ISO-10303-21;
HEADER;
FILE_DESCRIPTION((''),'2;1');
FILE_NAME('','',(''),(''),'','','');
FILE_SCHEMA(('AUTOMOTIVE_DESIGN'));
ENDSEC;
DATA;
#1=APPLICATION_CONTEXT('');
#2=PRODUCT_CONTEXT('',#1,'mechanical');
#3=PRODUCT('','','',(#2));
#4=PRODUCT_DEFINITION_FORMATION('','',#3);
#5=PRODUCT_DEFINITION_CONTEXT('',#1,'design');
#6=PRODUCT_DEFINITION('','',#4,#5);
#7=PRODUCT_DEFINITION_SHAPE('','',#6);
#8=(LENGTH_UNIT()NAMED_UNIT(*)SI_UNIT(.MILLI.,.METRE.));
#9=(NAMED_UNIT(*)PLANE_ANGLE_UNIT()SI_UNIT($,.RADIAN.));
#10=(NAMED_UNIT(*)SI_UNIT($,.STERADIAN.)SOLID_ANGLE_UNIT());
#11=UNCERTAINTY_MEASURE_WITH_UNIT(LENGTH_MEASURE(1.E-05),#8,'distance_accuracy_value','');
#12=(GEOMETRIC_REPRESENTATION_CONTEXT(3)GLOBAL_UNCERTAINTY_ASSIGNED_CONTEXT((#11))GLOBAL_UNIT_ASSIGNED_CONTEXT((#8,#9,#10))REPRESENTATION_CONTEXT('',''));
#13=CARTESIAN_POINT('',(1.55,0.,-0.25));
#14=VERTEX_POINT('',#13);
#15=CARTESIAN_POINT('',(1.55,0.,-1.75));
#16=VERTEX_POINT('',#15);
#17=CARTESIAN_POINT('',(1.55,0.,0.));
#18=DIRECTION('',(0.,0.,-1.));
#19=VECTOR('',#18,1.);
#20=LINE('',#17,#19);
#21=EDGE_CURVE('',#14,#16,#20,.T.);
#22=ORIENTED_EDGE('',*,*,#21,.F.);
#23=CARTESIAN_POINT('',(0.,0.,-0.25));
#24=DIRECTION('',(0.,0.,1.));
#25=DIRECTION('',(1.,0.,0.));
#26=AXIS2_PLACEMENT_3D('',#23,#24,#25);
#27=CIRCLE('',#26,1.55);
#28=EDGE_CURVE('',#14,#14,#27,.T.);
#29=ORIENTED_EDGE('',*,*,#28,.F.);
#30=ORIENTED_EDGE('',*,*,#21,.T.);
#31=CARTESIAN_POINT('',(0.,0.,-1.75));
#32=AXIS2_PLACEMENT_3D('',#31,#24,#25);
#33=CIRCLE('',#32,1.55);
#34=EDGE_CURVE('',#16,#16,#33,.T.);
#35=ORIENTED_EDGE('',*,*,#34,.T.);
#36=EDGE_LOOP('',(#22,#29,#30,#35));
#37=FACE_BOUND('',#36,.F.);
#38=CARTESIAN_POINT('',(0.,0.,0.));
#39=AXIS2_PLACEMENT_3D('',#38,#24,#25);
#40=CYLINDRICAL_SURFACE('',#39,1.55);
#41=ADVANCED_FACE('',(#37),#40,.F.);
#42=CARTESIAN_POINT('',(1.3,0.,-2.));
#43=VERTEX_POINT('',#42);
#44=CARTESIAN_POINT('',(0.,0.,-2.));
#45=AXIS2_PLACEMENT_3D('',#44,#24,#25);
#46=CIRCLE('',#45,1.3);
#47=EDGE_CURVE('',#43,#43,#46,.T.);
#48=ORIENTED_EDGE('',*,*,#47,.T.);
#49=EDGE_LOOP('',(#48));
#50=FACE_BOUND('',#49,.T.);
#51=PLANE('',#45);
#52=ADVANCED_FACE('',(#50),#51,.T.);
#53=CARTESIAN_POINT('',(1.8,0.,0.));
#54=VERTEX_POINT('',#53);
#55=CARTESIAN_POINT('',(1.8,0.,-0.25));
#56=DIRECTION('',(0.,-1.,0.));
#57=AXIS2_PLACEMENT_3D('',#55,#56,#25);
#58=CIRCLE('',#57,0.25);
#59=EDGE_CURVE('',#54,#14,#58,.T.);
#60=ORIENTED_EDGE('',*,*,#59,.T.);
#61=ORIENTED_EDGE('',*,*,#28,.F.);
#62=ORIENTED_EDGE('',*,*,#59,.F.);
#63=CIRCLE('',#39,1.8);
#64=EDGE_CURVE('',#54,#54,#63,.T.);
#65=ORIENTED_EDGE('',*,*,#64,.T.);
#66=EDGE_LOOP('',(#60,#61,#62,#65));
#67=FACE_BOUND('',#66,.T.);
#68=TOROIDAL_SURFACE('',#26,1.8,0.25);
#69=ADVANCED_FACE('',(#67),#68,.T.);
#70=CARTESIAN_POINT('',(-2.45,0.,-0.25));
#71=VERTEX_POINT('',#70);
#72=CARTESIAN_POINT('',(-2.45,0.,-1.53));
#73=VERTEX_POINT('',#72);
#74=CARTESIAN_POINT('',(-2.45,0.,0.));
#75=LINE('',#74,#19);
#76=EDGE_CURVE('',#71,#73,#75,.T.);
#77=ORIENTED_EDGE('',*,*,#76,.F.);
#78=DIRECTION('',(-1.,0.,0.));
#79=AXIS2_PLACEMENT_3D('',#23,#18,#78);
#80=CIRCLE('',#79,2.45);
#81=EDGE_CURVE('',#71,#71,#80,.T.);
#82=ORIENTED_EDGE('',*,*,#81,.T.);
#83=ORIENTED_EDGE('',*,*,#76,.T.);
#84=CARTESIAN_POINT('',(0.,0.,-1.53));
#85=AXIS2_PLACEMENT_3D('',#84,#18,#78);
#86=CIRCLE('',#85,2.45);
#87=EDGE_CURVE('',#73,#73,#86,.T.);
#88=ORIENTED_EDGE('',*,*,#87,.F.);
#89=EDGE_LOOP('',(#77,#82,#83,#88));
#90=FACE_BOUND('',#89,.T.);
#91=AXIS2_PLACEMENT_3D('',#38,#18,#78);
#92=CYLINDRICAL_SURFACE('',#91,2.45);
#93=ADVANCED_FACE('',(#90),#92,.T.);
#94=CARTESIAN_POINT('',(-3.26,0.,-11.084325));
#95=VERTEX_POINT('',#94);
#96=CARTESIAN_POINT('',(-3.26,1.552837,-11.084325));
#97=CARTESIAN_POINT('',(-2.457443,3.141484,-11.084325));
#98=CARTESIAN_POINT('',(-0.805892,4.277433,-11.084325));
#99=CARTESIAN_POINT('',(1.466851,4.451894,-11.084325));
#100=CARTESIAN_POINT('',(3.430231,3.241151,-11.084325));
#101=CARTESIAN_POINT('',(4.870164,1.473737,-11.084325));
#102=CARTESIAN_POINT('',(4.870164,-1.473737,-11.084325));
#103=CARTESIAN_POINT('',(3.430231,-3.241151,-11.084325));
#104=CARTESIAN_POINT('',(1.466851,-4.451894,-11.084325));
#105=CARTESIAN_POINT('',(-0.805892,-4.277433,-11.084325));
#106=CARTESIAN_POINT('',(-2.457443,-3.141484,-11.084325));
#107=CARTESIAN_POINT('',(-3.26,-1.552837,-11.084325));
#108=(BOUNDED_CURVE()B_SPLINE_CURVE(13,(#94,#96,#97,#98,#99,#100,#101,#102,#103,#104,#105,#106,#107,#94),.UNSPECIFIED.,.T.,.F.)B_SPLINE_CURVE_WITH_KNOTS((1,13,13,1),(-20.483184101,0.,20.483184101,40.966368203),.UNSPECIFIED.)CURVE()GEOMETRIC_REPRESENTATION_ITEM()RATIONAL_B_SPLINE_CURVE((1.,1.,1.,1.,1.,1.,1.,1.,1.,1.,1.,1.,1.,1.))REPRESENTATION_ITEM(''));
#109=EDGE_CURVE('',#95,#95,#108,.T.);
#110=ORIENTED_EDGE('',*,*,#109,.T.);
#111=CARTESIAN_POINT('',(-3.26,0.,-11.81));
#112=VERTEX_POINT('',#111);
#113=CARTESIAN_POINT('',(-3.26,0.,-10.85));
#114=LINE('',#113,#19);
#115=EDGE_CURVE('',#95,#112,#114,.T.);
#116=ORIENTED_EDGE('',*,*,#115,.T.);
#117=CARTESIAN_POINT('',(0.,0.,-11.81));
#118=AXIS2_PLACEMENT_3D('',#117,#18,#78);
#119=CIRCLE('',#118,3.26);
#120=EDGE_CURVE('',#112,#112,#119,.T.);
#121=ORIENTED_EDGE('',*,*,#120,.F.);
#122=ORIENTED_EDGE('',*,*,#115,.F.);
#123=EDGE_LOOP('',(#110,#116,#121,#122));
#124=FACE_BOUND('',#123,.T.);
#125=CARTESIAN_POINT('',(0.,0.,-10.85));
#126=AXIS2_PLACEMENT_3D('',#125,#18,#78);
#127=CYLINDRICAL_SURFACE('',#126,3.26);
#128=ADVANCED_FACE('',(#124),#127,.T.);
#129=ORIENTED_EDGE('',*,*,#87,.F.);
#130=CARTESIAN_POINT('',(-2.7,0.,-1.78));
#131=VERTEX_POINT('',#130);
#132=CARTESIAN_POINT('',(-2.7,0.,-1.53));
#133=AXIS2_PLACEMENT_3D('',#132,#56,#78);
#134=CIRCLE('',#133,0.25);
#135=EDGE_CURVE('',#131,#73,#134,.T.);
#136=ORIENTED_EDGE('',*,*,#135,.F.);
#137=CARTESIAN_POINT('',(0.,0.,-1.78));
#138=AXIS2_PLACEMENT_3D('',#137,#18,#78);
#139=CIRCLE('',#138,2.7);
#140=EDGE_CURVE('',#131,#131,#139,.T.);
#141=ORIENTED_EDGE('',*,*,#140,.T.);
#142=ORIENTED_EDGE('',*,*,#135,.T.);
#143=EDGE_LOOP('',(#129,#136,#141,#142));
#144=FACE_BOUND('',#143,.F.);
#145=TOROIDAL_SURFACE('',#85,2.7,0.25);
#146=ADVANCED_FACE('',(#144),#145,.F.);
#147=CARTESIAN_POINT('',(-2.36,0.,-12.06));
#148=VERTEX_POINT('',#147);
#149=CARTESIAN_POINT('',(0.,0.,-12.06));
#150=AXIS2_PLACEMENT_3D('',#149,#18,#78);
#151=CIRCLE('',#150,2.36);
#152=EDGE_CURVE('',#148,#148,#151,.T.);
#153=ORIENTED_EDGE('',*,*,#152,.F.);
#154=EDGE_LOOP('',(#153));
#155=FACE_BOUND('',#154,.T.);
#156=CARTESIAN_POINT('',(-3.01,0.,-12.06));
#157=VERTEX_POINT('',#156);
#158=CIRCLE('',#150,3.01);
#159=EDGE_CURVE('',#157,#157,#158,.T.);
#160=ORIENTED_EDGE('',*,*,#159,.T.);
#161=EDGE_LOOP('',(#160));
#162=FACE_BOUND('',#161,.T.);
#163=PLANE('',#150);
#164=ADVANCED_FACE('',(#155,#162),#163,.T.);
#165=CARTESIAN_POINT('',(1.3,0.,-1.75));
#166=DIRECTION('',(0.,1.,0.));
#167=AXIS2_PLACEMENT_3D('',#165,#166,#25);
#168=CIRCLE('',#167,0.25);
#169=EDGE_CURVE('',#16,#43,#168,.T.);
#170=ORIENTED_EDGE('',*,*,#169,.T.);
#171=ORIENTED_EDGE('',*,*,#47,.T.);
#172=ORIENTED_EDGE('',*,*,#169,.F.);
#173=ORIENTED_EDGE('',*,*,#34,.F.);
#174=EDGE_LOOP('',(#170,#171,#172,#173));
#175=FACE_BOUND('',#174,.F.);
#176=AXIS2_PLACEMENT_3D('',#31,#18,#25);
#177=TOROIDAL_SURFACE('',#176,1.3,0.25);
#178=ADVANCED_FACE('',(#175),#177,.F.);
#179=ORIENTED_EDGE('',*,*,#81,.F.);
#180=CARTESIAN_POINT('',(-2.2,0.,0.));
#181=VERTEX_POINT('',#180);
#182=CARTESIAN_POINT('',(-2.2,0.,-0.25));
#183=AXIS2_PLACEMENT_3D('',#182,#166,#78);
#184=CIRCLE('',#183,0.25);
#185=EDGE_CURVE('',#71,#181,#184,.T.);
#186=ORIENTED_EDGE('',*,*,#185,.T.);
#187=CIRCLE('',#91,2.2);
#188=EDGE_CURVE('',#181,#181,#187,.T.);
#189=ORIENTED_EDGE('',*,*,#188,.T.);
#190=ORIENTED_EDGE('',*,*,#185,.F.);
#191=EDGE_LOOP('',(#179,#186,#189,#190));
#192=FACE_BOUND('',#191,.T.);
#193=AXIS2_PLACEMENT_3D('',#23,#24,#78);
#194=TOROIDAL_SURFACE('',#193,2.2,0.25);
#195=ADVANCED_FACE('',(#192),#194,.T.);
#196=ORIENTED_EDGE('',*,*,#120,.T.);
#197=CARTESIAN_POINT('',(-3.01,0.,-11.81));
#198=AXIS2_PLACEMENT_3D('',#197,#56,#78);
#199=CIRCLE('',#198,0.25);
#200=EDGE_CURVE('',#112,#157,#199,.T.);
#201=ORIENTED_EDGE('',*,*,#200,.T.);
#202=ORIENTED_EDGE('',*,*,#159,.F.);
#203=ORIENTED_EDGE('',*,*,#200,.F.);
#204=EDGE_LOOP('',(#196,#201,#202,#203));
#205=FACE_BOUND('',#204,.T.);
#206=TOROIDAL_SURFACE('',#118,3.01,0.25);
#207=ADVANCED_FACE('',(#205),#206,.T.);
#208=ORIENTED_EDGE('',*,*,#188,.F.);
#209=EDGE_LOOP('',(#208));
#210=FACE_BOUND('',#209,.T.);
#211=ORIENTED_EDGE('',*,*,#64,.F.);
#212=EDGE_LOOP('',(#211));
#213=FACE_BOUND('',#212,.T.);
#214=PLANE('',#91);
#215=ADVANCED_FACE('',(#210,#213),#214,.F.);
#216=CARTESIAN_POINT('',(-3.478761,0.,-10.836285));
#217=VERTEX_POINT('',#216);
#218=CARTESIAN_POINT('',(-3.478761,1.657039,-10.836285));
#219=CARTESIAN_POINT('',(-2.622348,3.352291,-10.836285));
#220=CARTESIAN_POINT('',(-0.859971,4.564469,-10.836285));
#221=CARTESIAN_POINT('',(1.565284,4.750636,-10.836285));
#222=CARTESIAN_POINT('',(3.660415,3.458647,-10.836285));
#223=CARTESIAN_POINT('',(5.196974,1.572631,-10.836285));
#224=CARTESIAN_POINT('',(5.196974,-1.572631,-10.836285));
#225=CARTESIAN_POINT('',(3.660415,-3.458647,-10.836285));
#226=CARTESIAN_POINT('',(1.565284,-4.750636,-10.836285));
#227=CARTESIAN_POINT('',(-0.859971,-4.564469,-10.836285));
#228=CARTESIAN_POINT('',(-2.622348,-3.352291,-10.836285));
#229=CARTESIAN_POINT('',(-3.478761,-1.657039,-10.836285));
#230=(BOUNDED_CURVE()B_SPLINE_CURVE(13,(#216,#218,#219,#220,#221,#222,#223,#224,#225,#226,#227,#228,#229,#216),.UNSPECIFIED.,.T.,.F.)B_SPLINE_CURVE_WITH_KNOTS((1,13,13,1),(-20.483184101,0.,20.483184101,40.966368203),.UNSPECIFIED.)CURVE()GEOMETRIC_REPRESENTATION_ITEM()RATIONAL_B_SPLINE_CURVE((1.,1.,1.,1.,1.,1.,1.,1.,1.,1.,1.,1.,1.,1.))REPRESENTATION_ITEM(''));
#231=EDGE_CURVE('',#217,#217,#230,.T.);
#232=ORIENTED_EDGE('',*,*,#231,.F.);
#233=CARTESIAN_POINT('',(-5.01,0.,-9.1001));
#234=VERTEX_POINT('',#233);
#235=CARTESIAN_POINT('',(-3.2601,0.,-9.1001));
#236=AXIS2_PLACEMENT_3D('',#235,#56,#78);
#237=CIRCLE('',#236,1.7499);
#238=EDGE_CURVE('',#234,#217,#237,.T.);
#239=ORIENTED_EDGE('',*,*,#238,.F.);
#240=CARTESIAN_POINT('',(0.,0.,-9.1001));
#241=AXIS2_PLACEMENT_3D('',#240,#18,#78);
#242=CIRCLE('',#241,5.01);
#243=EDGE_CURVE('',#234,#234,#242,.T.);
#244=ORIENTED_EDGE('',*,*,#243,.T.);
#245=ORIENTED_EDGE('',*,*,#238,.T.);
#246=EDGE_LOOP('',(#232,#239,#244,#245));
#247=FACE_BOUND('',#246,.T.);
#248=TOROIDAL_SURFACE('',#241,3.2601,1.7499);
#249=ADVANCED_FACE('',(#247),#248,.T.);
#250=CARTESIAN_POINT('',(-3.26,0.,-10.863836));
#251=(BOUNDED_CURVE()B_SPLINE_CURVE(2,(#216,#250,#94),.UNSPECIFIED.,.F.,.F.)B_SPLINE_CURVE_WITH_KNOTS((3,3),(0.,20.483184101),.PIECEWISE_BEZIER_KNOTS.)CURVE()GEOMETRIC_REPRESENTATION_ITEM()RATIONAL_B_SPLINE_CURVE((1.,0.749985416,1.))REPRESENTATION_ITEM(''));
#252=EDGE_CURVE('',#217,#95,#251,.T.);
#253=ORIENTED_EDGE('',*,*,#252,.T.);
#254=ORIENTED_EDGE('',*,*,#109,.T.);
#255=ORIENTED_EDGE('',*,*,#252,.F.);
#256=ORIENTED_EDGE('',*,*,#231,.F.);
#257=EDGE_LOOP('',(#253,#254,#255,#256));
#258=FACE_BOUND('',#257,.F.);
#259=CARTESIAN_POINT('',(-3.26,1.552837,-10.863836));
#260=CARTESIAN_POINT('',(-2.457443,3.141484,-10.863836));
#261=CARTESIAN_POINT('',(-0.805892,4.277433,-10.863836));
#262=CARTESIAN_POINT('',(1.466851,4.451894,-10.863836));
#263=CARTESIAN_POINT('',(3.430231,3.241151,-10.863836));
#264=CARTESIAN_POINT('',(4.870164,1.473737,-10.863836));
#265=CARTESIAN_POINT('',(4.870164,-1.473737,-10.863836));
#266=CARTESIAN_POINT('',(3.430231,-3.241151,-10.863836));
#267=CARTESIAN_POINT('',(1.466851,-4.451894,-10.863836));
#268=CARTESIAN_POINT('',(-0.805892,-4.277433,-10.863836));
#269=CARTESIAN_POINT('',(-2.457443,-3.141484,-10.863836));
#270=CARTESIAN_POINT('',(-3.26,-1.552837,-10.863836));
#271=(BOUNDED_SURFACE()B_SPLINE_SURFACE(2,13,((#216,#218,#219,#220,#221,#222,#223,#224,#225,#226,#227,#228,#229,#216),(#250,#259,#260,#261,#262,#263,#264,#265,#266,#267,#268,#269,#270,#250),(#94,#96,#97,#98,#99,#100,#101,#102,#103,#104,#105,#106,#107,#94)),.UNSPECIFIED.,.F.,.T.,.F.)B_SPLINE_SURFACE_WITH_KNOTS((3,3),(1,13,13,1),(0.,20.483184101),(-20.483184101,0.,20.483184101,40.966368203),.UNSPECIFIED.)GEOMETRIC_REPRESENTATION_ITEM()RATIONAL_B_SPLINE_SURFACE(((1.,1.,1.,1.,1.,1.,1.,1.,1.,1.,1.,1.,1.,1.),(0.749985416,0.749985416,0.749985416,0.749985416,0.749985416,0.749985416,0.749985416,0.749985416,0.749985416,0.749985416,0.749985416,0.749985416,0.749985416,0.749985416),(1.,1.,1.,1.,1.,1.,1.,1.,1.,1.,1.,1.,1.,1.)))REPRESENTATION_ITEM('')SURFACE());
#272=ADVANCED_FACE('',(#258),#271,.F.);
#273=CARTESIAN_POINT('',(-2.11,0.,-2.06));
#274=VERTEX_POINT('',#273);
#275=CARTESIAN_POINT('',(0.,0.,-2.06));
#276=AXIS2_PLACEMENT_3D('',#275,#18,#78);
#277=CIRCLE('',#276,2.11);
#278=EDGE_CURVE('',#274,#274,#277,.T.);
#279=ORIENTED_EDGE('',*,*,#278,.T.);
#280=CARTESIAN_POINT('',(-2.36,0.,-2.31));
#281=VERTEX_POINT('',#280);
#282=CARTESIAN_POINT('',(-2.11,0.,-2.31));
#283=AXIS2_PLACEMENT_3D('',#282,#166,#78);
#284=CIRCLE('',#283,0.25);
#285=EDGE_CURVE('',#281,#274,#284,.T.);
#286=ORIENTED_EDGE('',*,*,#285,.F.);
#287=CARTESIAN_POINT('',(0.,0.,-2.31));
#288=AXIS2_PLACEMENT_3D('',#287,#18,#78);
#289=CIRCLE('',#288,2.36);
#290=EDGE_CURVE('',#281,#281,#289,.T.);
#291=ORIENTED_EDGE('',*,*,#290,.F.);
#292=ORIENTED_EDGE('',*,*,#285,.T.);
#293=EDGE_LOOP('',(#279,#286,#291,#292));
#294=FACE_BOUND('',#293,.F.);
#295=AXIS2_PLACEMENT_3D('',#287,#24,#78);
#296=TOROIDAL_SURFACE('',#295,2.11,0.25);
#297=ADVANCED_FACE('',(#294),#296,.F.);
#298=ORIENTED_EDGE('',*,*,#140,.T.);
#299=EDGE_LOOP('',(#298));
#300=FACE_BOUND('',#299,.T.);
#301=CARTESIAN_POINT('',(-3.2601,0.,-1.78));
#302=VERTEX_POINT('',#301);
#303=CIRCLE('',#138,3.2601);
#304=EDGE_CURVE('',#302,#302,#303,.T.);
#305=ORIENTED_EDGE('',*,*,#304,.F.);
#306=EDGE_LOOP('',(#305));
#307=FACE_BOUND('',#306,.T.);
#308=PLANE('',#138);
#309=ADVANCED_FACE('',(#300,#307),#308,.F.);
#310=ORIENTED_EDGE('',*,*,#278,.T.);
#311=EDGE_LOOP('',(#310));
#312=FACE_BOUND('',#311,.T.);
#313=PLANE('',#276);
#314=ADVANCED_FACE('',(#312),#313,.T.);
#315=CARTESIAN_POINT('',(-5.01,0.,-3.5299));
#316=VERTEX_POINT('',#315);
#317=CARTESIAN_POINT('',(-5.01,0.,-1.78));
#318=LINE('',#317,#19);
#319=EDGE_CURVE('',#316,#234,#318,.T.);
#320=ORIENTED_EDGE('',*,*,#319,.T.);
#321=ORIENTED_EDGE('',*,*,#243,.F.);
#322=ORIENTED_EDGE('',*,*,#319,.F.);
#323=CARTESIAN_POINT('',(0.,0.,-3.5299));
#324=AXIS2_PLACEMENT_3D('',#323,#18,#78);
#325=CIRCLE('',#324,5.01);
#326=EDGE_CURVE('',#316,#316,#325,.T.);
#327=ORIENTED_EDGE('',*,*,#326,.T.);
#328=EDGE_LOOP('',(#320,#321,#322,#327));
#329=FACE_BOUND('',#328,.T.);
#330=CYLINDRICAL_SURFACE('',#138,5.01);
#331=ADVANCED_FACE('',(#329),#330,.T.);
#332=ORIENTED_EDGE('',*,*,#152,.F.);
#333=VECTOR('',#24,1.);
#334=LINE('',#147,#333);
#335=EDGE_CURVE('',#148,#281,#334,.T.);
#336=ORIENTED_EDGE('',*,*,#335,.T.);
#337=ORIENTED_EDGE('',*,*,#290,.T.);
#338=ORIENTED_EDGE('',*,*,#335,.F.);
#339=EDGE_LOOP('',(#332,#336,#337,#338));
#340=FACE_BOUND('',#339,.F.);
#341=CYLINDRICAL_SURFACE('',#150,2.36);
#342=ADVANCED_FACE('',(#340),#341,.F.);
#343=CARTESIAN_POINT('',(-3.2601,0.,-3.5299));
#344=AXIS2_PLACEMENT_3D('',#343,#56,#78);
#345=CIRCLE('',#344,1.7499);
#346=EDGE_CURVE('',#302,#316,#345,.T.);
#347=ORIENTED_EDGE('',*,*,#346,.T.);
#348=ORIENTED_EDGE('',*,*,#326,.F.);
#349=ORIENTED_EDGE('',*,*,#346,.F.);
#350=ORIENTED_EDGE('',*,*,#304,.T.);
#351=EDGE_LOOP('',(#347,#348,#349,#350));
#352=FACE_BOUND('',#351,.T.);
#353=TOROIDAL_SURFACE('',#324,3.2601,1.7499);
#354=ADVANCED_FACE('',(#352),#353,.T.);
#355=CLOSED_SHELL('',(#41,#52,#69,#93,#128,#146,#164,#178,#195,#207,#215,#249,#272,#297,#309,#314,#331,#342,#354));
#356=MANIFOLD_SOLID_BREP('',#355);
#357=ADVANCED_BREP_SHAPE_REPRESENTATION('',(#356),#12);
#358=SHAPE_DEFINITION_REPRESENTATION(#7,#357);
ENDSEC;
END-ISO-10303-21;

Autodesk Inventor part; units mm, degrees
ref_plane "YZ Plane" through (0, 0, 0) normal (1, 0, 0) x (0, 1, 0)
ref_plane "XZ Plane" through (0, 0, 0) normal (0, 1, 0) x (-1, 0, 0)
ref_plane "XY Plane" through (0, 0, 0) normal (0, 0, 1) x (1, 0, 0)
sketch "Sketch1" plane through (0, 0, 0) normal (0, 1, 0) x (-1, 0, 0)
  line L0 (0, 0) -> (0, -12.06)
  line L1 (0, 0) -> (2.45, 0)
  line L2 (2.45, 0) -> (2.45, -1.78)
  line L3 (2.45, -1.78) -> (5.01, -1.78)
  line L4 (5.01, -1.78) -> (5.01, -10.85)
  line L5 (5.01, -10.85) -> (3.26, -10.85)
  line L6 (3.26, -10.85) -> (3.26, -12.06)
  line L7 (3.26, -12.06) -> (0, -12.06)
  dimension "d0" = 12.06
  dimension "d1" = 2.45
  dimension "d2" = 1.78
  dimension "d3" = 5.01
  dimension "d4" = 1.21
  dimension "d5" = 3.26
revolve "Head" add sketch "Sketch1" angle 360 about axis through (0, 0, 0) along (0, 0, -1)
fillet "Edge" radius 1.75 2 edges at (5.01, 0, -1.78) (5.01, 0, -10.85)
sketch "Sketch2" plane through (0, 0, 0) normal (0, 0, 1) x (1, 0, 0)
  circle A0 centre (0, 0) radius 2.45 projected
  circle A1 centre (0, 0) radius 1.55
  dimension "d8" = 0.9
extrude "Top" cut sketch "Sketch2" against normal blind 2 contours A1
sketch "Sketch3" plane through (0, 0, -12.06) normal (0, 0, -1) x (-1, 0, 0)
  circle A0 centre (0, 0) radius 3.26 projected
  circle A1 centre (0, 0) radius 2.36
  dimension "d11" = 0.9
extrude "Bottom" cut sketch "Sketch3" against normal blind 10 contours A1
fillet "Fillet2" radius 0.25 8 edges at (3.26, 0, -12.06) (3.2601, 0, -10.85) (3.26, 0, -10.85) (2.36, 0, -2.06) (2.45, 0, 0) (-1.55, 0, 0) (-1.55, 0, -2) (2.45, 0, -1.78)
properties part number "Lego Head"
